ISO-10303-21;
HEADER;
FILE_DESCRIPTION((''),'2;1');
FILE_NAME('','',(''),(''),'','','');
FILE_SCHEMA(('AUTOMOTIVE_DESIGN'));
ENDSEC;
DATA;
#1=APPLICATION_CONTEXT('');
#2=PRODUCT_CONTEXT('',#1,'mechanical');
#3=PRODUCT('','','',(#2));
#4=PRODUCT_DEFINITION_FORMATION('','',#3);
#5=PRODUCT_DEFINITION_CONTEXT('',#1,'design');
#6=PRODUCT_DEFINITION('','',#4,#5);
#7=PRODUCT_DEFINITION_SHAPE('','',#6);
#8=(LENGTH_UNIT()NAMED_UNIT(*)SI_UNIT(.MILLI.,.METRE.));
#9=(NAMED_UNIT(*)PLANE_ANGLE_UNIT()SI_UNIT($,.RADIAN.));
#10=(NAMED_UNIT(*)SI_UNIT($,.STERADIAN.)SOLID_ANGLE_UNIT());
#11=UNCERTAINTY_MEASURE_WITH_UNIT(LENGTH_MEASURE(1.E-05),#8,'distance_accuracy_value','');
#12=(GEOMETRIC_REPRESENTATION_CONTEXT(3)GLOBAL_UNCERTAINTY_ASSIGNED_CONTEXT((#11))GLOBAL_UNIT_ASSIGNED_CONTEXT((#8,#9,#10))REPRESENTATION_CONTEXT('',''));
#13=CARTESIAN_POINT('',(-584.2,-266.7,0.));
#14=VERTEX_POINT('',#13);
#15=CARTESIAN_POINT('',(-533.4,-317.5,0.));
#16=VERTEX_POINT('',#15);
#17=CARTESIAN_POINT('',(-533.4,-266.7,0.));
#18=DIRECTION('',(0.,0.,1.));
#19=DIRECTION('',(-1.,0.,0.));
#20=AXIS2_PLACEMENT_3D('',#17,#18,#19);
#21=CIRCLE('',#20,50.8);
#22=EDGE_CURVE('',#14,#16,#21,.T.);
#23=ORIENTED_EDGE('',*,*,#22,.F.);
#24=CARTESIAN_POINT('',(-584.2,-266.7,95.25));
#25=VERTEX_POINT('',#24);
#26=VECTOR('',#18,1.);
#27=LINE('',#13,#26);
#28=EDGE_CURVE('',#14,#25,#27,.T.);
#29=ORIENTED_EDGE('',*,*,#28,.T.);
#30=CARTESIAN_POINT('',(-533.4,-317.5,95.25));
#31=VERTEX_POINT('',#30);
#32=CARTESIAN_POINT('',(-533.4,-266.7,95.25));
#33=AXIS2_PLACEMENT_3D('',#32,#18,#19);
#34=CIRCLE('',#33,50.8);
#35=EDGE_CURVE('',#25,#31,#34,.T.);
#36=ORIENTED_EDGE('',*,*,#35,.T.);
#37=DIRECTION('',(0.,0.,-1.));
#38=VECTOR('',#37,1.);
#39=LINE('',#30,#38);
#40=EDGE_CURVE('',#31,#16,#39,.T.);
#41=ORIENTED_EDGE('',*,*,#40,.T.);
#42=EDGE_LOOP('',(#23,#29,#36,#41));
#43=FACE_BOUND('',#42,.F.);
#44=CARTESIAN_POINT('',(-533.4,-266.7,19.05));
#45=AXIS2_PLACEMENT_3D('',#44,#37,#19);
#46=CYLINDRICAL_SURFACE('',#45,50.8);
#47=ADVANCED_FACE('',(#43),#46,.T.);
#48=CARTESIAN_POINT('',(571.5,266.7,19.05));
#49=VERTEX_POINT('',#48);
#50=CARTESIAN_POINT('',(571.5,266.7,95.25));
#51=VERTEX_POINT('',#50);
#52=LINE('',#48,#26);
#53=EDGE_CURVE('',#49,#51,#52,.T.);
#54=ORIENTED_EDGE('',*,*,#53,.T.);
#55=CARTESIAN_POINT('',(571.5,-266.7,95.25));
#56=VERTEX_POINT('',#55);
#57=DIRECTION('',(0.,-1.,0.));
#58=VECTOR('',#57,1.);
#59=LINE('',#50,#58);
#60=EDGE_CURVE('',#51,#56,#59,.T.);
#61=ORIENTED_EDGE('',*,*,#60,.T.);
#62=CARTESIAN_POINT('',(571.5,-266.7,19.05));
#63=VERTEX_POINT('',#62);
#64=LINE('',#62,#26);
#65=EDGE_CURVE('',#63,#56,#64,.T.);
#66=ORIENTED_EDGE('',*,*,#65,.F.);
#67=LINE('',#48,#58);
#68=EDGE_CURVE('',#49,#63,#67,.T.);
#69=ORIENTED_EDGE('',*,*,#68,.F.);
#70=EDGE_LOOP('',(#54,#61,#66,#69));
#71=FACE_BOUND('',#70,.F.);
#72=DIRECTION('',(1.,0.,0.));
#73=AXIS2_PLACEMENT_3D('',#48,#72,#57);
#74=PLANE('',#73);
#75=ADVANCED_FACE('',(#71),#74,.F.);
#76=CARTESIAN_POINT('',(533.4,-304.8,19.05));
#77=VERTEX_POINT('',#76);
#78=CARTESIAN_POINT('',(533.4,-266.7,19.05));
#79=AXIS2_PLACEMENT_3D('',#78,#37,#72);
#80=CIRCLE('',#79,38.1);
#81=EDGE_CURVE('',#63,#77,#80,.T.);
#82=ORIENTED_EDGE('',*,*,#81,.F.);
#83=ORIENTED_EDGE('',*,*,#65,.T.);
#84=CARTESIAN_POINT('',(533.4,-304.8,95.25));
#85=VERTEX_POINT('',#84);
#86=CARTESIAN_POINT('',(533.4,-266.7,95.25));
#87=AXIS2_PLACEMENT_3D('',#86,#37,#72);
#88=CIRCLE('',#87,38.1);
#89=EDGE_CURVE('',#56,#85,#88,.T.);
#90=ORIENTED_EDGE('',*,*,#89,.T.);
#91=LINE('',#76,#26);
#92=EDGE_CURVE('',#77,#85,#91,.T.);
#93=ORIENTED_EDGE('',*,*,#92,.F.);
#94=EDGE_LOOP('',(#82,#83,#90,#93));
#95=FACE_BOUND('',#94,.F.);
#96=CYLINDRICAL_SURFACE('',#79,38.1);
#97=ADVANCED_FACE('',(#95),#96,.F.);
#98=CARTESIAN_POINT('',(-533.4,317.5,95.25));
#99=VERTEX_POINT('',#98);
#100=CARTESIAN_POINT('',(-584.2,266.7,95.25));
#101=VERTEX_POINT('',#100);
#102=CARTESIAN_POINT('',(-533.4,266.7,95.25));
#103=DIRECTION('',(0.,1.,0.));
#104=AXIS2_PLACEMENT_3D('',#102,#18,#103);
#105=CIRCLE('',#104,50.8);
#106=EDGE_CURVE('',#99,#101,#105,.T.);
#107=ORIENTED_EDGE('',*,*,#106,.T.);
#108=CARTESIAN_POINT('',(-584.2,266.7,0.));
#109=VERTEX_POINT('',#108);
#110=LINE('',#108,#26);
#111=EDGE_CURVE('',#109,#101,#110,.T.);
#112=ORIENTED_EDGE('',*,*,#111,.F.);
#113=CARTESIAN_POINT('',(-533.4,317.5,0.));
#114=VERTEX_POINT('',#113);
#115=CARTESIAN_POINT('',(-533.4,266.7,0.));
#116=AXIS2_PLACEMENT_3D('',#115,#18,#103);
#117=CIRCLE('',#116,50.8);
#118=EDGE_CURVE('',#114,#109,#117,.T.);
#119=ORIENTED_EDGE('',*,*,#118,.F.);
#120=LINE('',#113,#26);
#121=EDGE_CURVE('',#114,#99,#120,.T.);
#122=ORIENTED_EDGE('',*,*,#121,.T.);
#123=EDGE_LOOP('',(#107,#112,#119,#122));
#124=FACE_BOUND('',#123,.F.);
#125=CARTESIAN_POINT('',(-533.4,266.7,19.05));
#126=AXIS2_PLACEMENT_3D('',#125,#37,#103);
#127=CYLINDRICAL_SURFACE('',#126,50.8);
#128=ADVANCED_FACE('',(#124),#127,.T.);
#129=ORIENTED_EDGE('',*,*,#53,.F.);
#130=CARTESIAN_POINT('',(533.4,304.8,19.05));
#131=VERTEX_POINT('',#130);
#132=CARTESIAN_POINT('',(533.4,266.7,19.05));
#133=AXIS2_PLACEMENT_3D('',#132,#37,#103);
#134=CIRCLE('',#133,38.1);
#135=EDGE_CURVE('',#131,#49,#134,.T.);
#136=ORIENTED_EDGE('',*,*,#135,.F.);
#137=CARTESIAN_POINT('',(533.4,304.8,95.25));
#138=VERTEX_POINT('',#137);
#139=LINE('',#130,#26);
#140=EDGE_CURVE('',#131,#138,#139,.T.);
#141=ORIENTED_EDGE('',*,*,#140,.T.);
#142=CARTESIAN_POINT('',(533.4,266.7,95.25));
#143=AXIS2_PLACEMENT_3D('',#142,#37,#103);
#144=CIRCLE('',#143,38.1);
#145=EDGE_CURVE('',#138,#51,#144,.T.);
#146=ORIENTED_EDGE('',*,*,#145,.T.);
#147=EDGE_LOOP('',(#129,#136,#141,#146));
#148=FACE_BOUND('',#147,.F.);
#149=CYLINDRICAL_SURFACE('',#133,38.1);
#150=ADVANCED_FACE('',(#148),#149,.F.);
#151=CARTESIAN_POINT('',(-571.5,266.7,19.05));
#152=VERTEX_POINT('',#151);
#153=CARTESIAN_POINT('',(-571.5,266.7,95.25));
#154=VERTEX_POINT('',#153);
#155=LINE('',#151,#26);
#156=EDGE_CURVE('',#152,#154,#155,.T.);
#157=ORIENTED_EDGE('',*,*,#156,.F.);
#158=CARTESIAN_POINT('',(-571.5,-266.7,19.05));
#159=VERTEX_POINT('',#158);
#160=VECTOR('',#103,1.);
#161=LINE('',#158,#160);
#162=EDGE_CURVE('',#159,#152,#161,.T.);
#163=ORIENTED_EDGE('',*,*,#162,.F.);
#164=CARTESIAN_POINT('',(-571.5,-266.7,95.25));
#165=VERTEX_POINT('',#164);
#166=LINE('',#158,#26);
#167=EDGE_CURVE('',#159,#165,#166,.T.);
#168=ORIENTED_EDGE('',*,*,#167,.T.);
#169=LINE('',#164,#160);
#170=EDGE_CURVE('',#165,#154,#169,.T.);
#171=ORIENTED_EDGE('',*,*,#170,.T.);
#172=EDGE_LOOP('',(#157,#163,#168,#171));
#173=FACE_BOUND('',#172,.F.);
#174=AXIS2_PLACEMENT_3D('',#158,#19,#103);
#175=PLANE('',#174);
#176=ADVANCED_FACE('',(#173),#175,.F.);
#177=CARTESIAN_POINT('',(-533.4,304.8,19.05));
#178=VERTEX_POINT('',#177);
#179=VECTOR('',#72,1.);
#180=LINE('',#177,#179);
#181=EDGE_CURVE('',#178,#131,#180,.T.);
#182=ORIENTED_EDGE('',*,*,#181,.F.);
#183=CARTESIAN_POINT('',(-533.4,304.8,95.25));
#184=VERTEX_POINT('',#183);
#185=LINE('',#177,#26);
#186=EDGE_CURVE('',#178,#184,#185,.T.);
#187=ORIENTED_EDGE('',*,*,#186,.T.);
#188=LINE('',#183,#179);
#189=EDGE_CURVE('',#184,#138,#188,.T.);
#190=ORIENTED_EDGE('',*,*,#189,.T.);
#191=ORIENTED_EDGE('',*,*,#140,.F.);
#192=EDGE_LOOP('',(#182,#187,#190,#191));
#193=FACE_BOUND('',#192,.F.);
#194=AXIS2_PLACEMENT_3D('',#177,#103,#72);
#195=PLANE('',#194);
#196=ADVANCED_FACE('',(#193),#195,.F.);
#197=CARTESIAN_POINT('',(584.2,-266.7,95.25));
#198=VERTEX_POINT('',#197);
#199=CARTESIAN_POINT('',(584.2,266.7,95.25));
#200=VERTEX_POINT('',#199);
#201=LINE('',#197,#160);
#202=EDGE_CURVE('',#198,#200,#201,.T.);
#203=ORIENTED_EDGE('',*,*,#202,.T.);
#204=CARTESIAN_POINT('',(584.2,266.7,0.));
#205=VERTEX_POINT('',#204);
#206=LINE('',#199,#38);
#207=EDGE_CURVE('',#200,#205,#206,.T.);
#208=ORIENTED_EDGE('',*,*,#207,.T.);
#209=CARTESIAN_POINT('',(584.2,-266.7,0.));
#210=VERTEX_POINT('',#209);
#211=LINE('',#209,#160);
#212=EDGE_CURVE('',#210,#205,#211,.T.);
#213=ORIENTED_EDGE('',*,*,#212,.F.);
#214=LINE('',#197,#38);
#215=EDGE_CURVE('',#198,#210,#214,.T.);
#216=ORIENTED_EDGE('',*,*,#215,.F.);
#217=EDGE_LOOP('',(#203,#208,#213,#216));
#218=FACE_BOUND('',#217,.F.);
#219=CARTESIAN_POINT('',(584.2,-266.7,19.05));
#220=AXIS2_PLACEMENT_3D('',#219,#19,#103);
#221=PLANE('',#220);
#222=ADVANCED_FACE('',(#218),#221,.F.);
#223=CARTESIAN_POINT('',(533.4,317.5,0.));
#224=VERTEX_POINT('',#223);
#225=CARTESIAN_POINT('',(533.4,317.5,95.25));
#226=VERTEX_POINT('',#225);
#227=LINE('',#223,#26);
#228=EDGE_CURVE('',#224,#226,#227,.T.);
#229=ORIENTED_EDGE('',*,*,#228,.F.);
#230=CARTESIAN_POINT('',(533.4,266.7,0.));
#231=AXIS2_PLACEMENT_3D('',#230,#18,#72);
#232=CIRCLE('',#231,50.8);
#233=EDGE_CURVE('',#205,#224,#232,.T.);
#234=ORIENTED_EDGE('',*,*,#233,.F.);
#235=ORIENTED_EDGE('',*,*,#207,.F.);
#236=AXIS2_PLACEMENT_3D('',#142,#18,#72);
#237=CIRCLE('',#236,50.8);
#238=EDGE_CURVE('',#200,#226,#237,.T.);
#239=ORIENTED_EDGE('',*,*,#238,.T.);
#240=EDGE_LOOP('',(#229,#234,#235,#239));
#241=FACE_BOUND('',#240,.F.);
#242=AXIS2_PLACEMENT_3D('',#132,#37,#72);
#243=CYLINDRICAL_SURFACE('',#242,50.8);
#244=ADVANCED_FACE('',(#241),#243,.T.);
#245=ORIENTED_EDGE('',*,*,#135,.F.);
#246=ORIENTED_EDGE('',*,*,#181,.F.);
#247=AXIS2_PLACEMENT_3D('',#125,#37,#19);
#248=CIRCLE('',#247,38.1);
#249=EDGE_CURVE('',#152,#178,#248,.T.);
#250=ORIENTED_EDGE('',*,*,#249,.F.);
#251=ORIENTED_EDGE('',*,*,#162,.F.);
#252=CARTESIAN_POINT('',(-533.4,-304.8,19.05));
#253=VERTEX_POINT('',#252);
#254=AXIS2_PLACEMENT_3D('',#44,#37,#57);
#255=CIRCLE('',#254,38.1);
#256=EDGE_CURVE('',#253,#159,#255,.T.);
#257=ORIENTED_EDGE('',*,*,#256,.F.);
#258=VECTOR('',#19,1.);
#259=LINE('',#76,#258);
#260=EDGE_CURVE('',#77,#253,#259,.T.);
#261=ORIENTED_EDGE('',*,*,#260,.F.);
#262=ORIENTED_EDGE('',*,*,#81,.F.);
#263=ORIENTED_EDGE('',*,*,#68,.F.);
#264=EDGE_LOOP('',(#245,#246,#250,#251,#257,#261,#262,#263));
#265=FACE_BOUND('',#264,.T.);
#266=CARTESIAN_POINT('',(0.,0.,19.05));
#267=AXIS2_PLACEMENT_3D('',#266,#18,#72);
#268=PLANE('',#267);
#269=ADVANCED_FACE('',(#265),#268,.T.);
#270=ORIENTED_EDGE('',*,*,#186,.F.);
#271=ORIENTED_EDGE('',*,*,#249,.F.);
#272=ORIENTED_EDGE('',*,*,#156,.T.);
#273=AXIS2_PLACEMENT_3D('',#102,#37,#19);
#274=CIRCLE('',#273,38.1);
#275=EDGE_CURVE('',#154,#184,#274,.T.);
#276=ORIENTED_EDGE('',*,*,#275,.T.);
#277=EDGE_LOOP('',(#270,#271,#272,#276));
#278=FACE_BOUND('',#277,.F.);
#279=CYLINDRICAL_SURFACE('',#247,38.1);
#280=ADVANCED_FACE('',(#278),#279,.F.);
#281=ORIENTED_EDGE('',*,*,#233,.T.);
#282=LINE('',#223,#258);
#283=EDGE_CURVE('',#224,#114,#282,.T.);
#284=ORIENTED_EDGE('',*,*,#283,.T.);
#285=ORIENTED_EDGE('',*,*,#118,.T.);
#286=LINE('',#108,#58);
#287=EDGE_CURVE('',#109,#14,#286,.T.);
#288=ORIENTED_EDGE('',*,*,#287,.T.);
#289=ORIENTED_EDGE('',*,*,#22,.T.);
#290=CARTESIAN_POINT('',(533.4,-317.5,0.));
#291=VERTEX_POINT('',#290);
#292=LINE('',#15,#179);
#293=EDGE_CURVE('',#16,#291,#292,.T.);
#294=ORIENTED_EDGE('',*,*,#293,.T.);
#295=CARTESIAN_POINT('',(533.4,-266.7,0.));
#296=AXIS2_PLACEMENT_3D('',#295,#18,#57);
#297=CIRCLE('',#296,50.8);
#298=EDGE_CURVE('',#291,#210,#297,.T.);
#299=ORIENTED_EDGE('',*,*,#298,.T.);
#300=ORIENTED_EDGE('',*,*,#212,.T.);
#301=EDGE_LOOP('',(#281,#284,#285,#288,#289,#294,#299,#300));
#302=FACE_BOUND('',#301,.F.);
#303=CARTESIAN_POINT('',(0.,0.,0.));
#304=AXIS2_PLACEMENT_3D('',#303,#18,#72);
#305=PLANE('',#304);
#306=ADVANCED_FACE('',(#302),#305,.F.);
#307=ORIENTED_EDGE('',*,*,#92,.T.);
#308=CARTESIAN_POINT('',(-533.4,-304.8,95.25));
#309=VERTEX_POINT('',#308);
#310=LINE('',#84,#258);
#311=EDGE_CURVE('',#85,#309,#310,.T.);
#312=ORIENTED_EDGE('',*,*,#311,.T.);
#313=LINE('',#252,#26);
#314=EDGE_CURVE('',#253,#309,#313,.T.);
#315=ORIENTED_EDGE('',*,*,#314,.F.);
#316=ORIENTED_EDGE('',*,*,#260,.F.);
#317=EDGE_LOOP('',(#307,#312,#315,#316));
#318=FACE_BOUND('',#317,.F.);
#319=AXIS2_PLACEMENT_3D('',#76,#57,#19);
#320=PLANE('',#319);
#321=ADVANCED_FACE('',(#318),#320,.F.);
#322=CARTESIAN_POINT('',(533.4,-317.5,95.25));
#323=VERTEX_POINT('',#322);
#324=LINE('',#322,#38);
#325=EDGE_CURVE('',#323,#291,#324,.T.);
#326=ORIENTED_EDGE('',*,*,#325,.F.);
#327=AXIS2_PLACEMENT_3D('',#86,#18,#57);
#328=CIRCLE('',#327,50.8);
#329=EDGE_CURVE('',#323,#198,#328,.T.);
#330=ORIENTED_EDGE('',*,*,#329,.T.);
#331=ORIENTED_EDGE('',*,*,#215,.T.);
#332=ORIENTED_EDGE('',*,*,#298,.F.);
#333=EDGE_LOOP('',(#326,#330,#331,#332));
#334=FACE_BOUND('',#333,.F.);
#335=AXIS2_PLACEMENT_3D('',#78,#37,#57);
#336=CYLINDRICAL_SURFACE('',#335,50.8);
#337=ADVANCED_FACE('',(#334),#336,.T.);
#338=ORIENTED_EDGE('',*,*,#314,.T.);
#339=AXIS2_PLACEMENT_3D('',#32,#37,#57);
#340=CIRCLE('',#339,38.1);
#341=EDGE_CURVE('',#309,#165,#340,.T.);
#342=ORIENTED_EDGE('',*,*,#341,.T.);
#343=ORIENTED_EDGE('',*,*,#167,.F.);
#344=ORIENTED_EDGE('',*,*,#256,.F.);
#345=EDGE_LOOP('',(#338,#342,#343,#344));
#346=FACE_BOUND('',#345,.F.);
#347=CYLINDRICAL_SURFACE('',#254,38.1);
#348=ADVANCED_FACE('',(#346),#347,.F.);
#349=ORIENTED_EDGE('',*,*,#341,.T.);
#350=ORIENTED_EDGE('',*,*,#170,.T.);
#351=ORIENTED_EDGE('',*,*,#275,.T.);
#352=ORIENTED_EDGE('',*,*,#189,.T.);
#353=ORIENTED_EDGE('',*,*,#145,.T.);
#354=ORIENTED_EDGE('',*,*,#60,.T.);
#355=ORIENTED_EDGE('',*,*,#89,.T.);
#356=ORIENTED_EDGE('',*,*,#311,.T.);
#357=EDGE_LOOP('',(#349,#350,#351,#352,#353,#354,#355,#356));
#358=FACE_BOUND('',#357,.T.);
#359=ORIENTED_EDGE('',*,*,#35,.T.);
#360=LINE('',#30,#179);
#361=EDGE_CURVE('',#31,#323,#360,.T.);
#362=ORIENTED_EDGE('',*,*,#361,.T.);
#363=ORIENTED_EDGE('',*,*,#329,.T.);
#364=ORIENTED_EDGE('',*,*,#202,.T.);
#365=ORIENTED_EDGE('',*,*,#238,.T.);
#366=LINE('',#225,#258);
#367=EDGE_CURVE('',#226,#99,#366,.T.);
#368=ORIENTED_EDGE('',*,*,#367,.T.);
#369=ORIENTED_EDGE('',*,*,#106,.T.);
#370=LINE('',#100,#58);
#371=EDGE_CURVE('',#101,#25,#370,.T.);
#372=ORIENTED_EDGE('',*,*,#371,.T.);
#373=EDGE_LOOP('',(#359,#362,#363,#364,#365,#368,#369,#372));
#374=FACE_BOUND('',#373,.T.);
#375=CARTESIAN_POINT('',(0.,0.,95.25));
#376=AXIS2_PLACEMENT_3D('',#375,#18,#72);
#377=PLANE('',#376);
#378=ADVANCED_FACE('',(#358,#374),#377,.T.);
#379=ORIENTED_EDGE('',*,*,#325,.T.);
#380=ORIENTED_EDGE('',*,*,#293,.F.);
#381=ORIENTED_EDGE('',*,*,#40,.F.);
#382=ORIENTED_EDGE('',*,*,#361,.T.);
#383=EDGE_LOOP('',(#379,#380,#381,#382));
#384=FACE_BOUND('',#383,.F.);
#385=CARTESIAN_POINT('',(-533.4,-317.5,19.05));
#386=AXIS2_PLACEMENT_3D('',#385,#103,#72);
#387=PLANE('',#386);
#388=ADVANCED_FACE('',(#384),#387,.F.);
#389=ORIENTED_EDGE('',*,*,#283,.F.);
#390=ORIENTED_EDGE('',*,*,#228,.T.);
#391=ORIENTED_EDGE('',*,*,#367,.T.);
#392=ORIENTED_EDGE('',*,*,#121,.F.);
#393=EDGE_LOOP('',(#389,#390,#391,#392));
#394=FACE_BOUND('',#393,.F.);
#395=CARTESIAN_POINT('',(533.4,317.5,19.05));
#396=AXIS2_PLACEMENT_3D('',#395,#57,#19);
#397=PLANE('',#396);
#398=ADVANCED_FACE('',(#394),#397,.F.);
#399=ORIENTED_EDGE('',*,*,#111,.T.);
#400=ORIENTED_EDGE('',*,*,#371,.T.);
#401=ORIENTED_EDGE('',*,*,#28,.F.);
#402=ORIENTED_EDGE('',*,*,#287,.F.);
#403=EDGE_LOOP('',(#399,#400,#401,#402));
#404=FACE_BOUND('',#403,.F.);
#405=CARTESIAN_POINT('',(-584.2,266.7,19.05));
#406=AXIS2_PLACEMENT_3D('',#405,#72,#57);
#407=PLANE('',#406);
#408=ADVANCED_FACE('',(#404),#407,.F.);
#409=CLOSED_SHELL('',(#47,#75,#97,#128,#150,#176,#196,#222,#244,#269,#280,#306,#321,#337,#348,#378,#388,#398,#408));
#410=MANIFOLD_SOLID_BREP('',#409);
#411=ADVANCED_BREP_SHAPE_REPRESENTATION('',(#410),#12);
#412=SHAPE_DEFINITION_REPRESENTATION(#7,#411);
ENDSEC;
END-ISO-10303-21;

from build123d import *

# Parameters (mm, degrees)
F1_DEPTH = 19.05
F3_DEPTH = 76.2


# Not quite as in the source:
# - a feature names something its author has since deleted; it is built from what else it names


with BuildPart() as f1:
    # F0 (on Top) → F1 (new body)
    with BuildSketch(Plane.XY):
        with BuildLine():
            Line((533.4, 317.5), (-533.4, 317.5))
            ThreePointArc((-533.4, 317.5), (-569.3210244843, 302.6210244843), (-584.2, 266.7))
            Line((-584.2, 266.7), (-584.2, -266.7))
            ThreePointArc((-584.2, -266.7), (-569.3210244843, -302.6210244843), (-533.4, -317.5))
            Line((-533.4, -317.5), (533.4, -317.5))
            ThreePointArc((533.4, -317.5), (569.3210244843, -302.6210244843), (584.2, -266.7))
            Line((584.2, -266.7), (584.2, 266.7))
            ThreePointArc((584.2, 266.7), (569.3210244843, 302.6210244843), (533.4, 317.5))
        make_face()
    extrude(amount=F1_DEPTH)

    # F2 (on face) → F3 (join)
    with BuildSketch(Plane.XY.offset(19.05)):
        with BuildLine():
            ThreePointArc((584.2, 266.7), (569.3210244843, 302.6210244843), (533.4, 317.5))
            Line((533.4, 317.5), (-533.4, 317.5))
            ThreePointArc((-533.4, 317.5), (-569.3210244843, 302.6210244843), (-584.2, 266.7))
            Line((-584.2, 266.7), (-584.2, -266.7))
            ThreePointArc((-584.2, -266.7), (-569.3210244843, -302.6210244843), (-533.4, -317.5))
            Line((-533.4, -317.5), (533.4, -317.5))
            ThreePointArc((533.4, -317.5), (569.3210244843, -302.6210244843), (584.2, -266.7))
            Line((584.2, -266.7), (584.2, 266.7))
        make_face()
        with BuildLine():
            Line((-571.5, -266.7), (-571.5, 266.7))
            ThreePointArc((-571.5, 266.7), (-560.3407683632, 293.6407683632), (-533.4, 304.8))
            Line((-533.4, 304.8), (533.4, 304.8))
            ThreePointArc((533.4, 304.8), (560.3407683632, 293.6407683632), (571.5, 266.7))
            Line((571.5, 266.7), (571.5, -266.7))
            ThreePointArc((571.5, -266.7), (560.3407683632, -293.6407683632), (533.4, -304.8))
            Line((533.4, -304.8), (-533.4, -304.8))
            ThreePointArc((-533.4, -304.8), (-560.3407683632, -293.6407683632), (-571.5, -266.7))
        make_face(mode=Mode.SUBTRACT)
    extrude(amount=F3_DEPTH)


solid = f1.part
